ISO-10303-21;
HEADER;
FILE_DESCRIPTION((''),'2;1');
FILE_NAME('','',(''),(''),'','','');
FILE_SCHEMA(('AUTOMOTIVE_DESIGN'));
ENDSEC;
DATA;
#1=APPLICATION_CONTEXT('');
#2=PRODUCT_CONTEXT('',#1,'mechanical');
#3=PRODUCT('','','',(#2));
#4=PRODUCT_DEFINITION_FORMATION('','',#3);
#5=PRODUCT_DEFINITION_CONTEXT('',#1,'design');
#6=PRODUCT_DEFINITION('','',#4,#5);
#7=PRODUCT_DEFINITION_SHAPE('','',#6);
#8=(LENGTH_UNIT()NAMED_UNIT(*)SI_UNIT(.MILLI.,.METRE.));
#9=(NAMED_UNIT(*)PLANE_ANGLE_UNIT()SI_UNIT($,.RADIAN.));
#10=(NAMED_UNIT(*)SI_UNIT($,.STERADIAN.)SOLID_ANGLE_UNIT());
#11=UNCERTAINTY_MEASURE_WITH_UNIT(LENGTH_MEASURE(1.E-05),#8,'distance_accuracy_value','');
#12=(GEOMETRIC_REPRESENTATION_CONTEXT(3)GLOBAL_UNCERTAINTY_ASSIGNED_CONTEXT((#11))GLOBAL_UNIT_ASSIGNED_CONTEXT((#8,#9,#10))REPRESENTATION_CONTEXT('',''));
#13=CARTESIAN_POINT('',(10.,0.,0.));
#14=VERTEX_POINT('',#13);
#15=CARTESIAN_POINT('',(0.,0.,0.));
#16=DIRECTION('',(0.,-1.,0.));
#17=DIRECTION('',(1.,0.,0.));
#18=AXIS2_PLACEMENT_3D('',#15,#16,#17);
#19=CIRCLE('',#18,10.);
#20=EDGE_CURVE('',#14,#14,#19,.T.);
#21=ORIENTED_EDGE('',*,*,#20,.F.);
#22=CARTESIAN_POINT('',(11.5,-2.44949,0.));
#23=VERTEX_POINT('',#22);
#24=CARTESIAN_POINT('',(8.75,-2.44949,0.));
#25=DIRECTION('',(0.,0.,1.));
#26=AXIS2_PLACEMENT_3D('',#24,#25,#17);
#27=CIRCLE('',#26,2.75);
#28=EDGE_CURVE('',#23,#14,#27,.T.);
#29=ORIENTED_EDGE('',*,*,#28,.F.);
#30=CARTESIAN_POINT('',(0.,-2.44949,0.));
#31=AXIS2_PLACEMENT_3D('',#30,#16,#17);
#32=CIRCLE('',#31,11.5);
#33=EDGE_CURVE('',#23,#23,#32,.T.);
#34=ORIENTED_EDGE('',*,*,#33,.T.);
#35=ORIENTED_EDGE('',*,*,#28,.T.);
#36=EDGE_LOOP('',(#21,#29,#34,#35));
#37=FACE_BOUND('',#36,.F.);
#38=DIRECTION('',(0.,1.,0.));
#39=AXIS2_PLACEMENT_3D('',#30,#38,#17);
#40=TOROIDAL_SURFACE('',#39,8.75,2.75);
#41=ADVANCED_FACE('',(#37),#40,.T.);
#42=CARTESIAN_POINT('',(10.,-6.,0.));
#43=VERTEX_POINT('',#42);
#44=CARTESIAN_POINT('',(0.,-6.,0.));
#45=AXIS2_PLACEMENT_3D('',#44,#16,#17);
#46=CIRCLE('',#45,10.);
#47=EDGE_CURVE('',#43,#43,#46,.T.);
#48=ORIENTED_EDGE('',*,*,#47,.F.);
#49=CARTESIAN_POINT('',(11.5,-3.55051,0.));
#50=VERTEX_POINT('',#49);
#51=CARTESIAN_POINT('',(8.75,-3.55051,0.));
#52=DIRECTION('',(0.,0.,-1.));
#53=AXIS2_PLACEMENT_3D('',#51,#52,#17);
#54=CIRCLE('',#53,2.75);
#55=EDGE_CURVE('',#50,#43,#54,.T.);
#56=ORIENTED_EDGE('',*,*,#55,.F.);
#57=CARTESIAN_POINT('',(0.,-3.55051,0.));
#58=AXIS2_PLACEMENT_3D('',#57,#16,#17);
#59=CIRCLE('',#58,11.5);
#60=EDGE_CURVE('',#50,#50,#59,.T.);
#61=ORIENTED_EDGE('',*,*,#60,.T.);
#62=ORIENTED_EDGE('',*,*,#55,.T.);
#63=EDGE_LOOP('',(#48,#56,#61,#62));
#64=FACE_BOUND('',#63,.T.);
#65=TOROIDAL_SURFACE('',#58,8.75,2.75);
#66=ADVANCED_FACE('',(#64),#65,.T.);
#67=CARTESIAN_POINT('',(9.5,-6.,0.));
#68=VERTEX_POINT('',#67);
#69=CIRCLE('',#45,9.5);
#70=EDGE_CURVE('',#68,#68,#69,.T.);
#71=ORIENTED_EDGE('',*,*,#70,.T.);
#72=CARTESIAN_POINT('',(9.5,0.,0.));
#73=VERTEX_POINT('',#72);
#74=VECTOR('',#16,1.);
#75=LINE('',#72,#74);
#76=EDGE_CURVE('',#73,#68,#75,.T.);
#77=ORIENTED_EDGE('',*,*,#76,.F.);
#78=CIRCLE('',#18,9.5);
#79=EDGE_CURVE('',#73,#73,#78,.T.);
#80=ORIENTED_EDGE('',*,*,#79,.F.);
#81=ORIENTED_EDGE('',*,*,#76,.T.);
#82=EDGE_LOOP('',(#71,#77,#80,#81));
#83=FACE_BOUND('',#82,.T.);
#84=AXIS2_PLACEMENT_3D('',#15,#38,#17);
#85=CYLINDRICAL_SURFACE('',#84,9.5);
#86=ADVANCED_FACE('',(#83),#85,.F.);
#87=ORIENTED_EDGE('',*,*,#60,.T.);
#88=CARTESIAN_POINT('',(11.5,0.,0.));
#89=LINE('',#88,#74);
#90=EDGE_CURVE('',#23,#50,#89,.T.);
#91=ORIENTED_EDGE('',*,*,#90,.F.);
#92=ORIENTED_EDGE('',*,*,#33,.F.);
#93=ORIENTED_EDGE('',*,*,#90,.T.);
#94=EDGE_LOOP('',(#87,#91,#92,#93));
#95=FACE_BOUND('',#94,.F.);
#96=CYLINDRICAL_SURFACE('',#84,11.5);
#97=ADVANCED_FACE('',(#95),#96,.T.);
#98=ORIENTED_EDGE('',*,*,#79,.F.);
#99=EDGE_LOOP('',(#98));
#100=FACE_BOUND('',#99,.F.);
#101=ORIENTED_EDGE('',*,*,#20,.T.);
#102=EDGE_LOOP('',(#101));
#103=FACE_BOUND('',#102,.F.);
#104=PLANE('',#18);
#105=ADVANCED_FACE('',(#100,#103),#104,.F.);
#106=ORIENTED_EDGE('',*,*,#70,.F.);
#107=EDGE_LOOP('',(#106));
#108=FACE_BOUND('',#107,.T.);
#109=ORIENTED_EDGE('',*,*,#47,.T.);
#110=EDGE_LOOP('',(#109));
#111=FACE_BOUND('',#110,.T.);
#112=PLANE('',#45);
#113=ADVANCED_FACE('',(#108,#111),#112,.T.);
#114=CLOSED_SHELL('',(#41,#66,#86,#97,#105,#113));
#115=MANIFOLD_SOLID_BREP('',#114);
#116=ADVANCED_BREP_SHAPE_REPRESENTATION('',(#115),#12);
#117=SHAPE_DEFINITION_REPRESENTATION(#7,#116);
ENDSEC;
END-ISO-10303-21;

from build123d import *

# Parameters (mm, degrees)
F0_R     = 11.5
F0_R_2   = 10
F1_DEPTH = 6
F0_R_3   = 9.5
F3_DEPTH = 6


# Not quite as in the source:
# - a fillet or chamfer that OpenCascade refuses, or shapes differently, is made with other operations: its cross-section is extruded or revolved along the edge and cut away or added


with BuildPart() as f1:
    # F0 (on Front) → F1 (new body)
    with BuildSketch(Plane.XZ):
        Circle(F0_R)
        Circle(F0_R_2, mode=Mode.SUBTRACT)
    extrude(amount=F1_DEPTH)

    # F2: fillet of radius 2.75 on 3 edges, made by hand

    # F2_s1 → F2_t2 (revolve, cut)
    with BuildSketch(Plane.XY):
        with BuildLine():
            ThreePointArc((11.5, -2.4494897428), (11.0952078799, -1.0133490811), (10, 0))
            Line((10, 0), (11.5, 0))
            Line((11.5, 0), (11.5, -2.4494897428))
        make_face()
    revolve(axis=Axis((0, 0, 0), (0, -1, 0)), mode=Mode.SUBTRACT)

    # F2_s3 → F2_t4 (revolve, cut)
    with BuildSketch(Plane.XY):
        with BuildLine():
            ThreePointArc((11.5, -3.5505102572), (11.0952078799, -4.9866509189), (10, -6))
            Line((10, -6), (11.5, -6))
            Line((11.5, -6), (11.5, -3.5505102572))
        make_face()
    revolve(axis=Axis((0, -6, 0), (0, -1, 0)), mode=Mode.SUBTRACT)

    # F0 (on Front) → F3 (join)
    with BuildSketch(Plane.XZ):
        Circle(F0_R_2)
        Circle(F0_R_3, mode=Mode.SUBTRACT)
    extrude(amount=F3_DEPTH)


solid = f1.part
